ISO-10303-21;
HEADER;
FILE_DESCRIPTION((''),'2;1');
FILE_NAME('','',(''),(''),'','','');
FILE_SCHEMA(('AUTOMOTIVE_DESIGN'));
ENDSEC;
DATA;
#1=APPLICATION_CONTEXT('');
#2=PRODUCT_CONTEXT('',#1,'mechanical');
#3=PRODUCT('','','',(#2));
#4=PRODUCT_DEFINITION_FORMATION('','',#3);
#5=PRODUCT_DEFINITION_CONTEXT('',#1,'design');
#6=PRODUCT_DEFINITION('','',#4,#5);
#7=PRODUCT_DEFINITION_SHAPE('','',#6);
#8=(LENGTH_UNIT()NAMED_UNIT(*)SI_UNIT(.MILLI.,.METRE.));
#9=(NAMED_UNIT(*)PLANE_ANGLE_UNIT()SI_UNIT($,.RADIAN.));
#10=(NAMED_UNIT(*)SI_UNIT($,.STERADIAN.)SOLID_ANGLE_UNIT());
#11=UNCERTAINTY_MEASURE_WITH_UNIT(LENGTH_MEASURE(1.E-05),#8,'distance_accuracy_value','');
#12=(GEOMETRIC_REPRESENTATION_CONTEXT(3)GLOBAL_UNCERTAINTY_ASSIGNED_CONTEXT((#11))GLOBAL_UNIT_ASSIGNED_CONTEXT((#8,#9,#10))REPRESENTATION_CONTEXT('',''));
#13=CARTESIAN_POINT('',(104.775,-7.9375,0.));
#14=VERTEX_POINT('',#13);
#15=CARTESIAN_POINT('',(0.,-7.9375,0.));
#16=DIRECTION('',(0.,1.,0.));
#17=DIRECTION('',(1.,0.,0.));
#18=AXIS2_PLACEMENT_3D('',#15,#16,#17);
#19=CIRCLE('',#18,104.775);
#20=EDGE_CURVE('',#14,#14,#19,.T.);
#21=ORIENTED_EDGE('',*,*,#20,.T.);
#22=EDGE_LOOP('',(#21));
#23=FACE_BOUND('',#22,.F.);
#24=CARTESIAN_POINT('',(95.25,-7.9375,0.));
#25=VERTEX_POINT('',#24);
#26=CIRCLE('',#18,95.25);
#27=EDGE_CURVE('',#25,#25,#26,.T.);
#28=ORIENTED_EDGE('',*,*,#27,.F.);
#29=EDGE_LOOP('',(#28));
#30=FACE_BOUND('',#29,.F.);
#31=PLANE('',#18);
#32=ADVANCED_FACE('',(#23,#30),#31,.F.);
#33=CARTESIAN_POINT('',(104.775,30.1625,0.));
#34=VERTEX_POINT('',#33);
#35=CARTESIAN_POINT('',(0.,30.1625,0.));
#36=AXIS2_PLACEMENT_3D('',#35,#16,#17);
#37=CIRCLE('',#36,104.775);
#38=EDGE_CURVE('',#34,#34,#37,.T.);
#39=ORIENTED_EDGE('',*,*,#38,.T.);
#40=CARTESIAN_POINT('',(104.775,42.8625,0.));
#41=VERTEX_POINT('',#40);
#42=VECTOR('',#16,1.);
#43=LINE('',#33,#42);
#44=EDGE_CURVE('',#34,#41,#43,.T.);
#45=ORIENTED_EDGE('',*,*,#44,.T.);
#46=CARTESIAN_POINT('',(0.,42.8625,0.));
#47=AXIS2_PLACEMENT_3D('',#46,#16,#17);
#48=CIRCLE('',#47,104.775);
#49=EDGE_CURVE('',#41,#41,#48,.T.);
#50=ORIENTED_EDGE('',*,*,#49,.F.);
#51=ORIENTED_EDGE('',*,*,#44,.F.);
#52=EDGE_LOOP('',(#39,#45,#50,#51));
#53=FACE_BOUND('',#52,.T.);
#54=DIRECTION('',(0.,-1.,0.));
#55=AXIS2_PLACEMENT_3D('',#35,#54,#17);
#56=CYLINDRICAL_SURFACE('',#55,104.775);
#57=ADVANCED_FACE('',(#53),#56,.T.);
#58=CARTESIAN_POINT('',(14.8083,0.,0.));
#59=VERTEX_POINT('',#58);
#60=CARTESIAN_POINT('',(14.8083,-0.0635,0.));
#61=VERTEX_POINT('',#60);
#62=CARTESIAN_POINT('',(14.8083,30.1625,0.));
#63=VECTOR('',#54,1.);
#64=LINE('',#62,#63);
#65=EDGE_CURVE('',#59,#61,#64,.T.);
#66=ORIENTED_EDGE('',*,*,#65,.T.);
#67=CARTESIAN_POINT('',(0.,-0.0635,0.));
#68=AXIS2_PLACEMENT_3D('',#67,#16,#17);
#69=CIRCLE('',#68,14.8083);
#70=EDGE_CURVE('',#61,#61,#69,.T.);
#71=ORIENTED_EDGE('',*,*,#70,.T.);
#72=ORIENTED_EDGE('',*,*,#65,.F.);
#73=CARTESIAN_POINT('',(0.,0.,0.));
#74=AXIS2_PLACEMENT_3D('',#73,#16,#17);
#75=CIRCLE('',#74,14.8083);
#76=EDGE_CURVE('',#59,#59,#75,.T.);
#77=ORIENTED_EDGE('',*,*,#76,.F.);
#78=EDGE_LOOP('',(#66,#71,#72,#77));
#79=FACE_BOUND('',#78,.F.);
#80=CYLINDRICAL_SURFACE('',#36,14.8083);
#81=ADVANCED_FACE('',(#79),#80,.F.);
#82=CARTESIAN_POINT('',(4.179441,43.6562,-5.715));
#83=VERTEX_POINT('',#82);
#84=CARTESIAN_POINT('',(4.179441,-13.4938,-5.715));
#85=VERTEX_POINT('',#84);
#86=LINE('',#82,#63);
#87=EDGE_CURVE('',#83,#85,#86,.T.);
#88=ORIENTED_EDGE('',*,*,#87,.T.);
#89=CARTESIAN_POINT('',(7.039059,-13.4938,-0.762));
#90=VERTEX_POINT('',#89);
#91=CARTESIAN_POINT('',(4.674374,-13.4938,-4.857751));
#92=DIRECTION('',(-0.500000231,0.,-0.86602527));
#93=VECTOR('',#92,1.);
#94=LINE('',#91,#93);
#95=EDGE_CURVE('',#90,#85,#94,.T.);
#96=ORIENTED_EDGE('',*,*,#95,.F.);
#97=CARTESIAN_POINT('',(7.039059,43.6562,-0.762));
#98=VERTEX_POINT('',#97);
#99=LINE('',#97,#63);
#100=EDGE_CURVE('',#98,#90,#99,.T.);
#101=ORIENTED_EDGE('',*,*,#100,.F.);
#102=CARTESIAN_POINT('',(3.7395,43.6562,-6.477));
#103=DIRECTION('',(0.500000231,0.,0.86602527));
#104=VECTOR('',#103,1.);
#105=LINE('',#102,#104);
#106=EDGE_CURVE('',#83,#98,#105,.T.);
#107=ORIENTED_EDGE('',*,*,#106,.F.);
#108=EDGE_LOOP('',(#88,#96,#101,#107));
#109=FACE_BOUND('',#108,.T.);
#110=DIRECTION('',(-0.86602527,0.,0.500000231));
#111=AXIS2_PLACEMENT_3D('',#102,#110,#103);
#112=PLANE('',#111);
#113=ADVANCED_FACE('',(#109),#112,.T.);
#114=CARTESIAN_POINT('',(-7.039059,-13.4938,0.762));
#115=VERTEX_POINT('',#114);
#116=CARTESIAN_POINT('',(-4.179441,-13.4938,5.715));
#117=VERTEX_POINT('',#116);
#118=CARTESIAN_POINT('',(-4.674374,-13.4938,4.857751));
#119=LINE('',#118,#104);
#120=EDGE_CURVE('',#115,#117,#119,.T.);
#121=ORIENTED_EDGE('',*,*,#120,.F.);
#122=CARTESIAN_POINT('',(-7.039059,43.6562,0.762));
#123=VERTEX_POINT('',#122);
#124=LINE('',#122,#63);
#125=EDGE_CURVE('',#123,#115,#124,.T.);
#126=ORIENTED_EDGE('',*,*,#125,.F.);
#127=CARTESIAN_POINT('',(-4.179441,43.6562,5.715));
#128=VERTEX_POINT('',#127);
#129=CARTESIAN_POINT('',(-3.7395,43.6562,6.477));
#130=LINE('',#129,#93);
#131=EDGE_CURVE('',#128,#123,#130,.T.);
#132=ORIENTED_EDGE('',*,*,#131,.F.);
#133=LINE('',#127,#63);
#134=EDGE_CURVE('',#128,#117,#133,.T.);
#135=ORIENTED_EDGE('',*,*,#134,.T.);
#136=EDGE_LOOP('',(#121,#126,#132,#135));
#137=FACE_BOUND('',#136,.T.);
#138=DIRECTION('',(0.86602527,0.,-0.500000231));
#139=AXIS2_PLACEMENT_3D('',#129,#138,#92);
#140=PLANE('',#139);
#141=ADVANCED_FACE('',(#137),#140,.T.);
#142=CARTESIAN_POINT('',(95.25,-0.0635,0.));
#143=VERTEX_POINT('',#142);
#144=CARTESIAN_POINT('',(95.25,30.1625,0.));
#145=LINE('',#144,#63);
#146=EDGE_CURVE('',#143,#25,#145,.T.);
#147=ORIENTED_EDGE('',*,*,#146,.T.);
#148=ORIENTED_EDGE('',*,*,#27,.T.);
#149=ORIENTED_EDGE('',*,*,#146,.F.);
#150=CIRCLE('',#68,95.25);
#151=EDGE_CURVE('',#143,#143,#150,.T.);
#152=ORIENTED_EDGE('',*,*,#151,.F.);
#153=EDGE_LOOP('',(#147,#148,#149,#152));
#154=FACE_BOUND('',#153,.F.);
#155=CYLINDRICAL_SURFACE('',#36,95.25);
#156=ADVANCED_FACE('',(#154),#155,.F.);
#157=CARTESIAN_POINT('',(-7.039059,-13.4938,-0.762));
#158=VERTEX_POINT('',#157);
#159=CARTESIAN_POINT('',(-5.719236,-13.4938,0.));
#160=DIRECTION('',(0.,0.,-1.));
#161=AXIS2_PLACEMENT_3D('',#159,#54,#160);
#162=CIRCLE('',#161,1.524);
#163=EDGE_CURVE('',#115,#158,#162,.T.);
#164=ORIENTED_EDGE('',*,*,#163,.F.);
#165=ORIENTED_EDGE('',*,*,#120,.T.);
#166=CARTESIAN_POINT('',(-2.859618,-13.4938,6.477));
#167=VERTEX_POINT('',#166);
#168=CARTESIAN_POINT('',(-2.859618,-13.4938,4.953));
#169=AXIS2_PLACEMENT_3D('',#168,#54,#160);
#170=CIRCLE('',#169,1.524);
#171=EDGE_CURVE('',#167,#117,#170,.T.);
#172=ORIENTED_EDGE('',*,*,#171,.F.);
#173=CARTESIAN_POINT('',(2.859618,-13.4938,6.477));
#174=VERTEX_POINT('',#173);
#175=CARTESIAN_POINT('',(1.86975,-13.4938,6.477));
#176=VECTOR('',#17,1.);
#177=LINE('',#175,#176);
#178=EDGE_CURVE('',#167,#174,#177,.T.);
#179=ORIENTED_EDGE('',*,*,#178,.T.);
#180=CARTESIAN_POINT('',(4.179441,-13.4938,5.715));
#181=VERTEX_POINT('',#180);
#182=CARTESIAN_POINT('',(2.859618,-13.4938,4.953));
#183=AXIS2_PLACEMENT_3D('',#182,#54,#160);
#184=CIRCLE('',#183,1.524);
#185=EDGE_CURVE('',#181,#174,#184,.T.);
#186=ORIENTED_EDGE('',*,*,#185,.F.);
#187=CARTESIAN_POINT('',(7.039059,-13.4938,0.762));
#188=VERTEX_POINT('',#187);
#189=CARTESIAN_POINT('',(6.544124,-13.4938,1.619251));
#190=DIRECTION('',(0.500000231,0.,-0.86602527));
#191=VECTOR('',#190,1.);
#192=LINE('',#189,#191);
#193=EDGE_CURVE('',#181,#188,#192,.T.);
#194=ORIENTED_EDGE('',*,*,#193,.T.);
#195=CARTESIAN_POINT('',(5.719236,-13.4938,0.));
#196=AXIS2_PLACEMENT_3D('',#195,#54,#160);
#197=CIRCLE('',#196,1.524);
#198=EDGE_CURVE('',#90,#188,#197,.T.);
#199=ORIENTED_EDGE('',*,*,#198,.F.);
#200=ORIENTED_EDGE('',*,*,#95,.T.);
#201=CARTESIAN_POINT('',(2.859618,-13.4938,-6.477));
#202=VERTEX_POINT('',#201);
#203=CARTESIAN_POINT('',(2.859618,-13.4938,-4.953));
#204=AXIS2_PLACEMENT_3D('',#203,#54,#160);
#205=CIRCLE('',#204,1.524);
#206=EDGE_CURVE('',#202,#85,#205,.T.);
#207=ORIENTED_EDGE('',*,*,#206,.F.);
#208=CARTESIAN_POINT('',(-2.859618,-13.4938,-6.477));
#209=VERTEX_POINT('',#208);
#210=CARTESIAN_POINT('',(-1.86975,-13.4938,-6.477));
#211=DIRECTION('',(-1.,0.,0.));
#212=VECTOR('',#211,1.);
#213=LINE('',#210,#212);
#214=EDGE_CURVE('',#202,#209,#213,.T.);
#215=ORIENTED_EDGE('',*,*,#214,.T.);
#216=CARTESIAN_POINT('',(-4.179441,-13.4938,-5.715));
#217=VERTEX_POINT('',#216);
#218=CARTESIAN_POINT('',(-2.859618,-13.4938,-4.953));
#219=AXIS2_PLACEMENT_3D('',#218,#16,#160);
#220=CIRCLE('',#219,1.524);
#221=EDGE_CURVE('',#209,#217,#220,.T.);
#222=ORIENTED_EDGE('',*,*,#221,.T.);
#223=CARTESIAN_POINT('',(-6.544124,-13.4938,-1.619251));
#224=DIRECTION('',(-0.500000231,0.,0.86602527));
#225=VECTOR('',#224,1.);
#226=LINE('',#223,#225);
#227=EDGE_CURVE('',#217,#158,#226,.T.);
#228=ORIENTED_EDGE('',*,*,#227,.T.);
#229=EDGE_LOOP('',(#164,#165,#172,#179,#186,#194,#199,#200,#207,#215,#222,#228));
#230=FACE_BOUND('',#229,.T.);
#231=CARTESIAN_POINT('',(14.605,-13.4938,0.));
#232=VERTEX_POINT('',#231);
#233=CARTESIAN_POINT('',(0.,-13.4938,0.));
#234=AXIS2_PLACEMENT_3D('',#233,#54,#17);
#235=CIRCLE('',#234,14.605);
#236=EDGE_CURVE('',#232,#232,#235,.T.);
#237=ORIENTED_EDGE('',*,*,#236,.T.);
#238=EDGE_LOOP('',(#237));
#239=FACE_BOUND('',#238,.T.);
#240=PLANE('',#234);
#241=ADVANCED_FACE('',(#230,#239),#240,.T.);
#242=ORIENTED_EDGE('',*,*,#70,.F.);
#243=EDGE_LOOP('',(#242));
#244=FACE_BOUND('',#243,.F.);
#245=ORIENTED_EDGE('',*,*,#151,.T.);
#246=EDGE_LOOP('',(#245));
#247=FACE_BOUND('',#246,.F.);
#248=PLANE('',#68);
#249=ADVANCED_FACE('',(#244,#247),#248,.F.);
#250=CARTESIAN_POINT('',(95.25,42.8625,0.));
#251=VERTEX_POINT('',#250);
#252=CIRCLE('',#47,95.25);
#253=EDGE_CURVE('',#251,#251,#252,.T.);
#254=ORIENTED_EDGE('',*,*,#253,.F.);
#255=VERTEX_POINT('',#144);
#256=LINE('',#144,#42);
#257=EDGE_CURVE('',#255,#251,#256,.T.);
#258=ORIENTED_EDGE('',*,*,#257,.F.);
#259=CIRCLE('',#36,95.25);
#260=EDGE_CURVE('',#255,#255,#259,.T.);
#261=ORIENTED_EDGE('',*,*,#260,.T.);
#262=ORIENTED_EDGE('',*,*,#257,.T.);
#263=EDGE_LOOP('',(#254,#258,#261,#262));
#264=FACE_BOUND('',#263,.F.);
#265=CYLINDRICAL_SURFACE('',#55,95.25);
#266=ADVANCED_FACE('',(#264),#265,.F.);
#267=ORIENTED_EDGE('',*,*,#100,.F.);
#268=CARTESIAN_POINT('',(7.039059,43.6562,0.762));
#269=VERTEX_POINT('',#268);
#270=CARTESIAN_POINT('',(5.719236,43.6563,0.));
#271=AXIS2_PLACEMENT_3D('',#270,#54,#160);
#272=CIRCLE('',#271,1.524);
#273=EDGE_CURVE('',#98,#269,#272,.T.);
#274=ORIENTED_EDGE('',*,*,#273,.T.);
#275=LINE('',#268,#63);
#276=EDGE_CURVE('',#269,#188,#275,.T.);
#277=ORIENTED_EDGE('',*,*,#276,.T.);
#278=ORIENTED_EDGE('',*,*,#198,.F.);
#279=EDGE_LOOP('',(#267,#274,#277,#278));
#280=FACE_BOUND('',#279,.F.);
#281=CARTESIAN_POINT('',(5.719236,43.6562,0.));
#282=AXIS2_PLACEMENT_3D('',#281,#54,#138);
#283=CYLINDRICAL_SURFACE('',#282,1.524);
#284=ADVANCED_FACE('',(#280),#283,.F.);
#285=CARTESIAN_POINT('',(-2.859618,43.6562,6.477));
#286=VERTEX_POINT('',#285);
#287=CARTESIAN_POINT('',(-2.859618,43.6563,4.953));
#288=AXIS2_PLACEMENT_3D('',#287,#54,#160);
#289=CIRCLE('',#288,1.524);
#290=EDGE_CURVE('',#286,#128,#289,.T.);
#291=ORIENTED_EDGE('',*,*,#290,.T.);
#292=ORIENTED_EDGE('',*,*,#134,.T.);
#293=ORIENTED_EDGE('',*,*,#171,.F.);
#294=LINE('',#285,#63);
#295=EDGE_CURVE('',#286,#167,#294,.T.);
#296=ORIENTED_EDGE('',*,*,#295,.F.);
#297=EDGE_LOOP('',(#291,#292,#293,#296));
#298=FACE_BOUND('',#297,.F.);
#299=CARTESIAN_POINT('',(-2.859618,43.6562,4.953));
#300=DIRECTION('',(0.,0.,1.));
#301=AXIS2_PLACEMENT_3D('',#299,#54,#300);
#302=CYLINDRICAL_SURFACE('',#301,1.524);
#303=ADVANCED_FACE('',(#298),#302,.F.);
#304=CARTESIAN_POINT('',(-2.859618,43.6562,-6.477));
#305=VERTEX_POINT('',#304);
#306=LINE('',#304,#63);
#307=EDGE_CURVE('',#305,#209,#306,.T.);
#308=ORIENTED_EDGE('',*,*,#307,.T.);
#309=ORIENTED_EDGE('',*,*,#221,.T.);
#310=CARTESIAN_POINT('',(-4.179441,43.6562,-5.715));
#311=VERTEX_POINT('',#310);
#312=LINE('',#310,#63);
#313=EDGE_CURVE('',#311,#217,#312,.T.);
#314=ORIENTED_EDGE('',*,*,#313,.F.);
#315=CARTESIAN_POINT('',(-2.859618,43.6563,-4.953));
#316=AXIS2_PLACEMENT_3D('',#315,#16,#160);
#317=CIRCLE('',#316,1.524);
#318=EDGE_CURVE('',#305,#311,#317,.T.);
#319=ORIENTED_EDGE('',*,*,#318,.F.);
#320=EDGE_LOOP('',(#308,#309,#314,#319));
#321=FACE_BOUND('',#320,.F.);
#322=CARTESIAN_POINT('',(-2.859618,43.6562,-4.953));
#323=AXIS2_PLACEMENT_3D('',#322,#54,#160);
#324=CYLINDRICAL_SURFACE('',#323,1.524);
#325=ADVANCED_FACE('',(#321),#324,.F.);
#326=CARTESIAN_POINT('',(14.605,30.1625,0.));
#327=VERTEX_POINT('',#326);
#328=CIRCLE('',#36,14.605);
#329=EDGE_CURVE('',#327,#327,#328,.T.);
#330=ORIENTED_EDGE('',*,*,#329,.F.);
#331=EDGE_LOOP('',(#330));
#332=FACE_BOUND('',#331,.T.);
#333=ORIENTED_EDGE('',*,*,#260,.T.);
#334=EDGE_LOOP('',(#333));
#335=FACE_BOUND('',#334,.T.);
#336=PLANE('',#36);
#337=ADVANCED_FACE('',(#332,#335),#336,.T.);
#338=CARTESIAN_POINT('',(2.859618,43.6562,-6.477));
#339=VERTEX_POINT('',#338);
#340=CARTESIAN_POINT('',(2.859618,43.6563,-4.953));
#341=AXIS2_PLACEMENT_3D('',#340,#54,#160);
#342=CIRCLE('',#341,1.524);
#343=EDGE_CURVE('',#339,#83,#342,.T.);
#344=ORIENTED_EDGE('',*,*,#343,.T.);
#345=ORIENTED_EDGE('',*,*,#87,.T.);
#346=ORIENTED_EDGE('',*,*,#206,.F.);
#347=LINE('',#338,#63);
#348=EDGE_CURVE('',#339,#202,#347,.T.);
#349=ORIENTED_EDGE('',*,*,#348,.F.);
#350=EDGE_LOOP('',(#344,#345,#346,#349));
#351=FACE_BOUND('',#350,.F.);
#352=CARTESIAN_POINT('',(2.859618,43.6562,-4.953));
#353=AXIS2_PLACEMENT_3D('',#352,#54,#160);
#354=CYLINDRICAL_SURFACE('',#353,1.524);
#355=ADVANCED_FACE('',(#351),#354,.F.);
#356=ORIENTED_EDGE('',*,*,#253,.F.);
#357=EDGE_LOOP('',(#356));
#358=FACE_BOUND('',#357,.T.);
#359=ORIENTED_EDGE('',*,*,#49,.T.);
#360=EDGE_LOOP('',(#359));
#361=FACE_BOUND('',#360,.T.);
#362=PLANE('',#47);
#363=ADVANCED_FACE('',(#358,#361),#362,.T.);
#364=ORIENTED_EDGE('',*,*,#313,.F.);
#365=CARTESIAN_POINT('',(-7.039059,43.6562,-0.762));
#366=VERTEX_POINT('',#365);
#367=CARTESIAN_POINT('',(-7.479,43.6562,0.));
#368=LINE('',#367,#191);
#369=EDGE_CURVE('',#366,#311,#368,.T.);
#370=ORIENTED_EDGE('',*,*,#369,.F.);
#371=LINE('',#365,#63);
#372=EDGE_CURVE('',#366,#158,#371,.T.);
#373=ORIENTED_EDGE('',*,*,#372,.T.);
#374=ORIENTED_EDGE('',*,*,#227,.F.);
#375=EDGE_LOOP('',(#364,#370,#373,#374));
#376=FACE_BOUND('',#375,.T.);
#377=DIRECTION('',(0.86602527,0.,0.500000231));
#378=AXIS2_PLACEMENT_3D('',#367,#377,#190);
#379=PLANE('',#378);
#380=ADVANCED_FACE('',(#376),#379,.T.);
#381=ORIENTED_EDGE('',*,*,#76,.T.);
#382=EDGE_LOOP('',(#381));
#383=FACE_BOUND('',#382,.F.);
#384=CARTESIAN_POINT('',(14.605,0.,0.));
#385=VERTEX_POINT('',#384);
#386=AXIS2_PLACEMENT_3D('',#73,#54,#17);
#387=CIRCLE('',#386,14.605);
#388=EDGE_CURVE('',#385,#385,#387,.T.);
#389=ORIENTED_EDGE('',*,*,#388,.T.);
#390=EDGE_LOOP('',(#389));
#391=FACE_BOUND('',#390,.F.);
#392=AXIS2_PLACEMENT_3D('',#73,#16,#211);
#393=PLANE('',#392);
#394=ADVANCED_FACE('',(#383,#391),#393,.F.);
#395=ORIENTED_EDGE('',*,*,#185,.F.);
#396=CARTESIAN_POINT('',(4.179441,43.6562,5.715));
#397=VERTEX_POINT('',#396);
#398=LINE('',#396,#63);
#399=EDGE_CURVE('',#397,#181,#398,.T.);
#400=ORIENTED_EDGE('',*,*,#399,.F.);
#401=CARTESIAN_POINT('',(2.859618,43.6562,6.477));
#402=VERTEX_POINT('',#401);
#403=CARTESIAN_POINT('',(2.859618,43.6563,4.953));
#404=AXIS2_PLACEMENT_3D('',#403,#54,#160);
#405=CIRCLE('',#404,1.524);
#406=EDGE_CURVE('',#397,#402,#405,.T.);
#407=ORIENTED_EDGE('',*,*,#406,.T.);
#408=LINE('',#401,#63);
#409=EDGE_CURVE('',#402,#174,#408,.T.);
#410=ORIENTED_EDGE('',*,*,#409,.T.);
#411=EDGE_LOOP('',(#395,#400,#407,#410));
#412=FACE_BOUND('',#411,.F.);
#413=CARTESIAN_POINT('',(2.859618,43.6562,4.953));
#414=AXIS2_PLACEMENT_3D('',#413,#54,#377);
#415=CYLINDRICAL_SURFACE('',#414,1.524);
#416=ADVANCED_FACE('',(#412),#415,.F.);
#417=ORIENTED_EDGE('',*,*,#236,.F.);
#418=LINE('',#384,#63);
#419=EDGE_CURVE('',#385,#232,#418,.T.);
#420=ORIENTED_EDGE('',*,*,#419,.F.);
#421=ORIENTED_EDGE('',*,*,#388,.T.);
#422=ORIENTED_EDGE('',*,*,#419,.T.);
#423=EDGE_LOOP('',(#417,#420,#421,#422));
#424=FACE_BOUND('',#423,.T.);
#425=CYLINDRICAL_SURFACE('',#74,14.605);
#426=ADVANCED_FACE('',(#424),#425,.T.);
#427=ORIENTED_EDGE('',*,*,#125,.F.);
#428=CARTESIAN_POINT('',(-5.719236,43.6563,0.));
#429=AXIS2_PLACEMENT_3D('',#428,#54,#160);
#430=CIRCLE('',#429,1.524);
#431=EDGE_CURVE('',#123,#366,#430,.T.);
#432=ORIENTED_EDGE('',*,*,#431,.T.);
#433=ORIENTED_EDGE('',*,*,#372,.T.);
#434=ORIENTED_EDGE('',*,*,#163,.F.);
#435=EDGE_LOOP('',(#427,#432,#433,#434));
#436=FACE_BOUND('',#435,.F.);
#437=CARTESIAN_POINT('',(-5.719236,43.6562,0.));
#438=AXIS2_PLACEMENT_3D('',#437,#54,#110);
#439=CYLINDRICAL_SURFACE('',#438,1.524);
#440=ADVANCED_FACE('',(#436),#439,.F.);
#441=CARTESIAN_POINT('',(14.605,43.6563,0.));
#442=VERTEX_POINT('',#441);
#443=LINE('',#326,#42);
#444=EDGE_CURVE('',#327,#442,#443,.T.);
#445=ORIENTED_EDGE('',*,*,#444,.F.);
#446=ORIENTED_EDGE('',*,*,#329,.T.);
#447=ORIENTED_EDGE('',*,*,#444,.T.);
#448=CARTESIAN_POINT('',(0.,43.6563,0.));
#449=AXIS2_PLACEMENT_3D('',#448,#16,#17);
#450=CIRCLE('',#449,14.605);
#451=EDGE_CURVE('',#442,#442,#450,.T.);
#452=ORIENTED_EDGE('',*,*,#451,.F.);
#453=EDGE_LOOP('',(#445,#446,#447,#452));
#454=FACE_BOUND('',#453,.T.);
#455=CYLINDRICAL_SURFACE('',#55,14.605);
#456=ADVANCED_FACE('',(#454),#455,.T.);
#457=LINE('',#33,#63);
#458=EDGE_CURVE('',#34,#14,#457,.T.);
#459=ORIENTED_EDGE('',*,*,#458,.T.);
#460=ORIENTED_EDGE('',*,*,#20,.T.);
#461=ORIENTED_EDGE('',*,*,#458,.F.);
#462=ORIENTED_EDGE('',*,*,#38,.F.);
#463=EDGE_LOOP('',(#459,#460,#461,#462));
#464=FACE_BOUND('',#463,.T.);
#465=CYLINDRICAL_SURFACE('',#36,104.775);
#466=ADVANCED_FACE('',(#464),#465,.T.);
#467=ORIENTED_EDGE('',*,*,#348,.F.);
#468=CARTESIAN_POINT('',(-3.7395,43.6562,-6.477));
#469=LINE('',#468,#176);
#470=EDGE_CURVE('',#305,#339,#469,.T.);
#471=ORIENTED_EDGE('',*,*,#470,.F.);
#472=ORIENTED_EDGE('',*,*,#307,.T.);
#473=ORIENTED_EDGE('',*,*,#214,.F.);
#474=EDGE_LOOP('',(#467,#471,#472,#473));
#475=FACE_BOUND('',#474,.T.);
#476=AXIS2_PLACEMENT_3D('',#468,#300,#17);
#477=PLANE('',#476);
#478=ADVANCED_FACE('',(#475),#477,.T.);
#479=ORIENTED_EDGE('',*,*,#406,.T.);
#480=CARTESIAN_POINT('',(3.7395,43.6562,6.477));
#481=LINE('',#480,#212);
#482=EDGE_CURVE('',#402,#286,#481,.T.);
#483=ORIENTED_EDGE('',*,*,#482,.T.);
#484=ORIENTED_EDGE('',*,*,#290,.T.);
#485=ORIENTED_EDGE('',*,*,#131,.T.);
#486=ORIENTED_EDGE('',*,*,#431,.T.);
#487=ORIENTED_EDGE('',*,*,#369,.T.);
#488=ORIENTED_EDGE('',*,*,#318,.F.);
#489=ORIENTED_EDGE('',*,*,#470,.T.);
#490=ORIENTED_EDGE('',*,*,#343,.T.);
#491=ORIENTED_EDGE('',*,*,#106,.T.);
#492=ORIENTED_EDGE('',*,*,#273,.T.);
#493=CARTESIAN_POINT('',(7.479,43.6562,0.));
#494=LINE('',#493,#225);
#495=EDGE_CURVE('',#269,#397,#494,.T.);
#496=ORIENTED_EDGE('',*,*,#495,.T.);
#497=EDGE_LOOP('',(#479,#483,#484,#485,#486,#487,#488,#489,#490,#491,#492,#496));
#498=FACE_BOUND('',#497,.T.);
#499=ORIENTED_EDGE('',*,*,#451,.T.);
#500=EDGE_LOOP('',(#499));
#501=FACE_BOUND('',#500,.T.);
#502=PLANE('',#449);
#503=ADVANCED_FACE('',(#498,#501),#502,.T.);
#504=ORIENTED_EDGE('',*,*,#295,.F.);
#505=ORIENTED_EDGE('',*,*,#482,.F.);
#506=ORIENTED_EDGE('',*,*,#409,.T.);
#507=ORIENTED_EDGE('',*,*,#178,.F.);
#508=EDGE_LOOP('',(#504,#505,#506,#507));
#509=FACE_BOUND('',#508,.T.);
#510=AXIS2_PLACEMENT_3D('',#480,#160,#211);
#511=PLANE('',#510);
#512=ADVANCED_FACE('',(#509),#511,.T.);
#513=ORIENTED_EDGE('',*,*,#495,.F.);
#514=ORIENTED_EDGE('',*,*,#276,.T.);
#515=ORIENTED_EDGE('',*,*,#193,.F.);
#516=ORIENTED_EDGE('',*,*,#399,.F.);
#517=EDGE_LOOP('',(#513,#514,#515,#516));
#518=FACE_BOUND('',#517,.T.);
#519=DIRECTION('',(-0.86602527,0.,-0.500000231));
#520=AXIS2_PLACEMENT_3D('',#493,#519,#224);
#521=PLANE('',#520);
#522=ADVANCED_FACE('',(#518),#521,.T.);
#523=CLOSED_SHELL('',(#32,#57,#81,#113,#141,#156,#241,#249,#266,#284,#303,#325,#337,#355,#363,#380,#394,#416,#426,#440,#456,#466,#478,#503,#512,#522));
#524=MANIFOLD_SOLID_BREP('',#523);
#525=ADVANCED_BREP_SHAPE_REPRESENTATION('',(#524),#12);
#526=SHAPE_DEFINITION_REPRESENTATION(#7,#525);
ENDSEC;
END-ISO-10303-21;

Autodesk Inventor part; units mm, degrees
ref_plane "YZ Plane" through (0, 0, 0) normal (1, 0, 0) x (0, 1, 0)
ref_plane "XZ Plane" through (0, 0, 0) normal (0, 1, 0) x (-1, 0, 0)
ref_plane "XY Plane" through (0, 0, 0) normal (0, 0, 1) x (1, 0, 0)
sketch "Sketch1" plane through (0, 0, 0) normal (0, 1, 0) x (-1, 0, 0)
  line L0 (18.3309, -0.0019) -> (9.1638, -15.8759)
  line L1 (9.1638, -15.8759) -> (-9.1671, -15.8741)
  line L2 (-9.1671, -15.8741) -> (-18.3309, 0.0019)
  line L3 (-18.3309, 0.0019) -> (-9.1638, 15.8759)
  line L4 (-9.1638, 15.8759) -> (9.1671, 15.8741)
  line L5 (9.1671, 15.8741) -> (18.3309, -0.0019)
  point P0 (0, 0)
  dimension "d2" = 31.75
extrude "Extrusion1" add sketch "Sketch1" along normal blind 30.1625
sketch "Sketch2" plane through (0, 30.1625, 0) normal (0, 1, 0) x (1, 0, 0)
  circle A0 centre (0, 0) radius 14.605
  dimension "d5" = 29.21
extrude "Extrusion2" add sketch "Sketch2" along normal blind 13.4938
sketch "Sketch3" plane through (0, 0, 0) normal (0, -1, 0) x (1, 0, 0)
  circle A0 centre (0, 0) radius 14.605
  dimension "d8" = 29.21
extrude "Extrusion3" add sketch "Sketch3" along normal blind 13.4938
sketch "Sketch4" plane through (0, 43.6562, 0) normal (0, 1, 0) x (1, 0, 0)
  line L0 (-7.479, 0) -> (-3.7395, 6.477)
  line L1 (-3.7395, 6.477) -> (3.7395, 6.477)
  line L2 (3.7395, 6.477) -> (7.479, 0)
  line L3 (7.479, 0) -> (3.7395, -6.477)
  line L4 (3.7395, -6.477) -> (-3.7395, -6.477)
  line L5 (-3.7395, -6.477) -> (-7.479, 0)
  point P0 (0, 0)
  point P1 (0, 0)
  dimension "d11" = 12.954
extrude "Extrusion4" cut sketch "Sketch4" against normal through all
fillet "Fillet1" radius 1.524 6 edges at (7.479, 15.0813, 0) (3.7395, 15.0813, -6.477) (-7.479, 15.0813, 0) (-3.7395, 15.0813, -6.477) (-3.7395, 15.0813, 6.477) (3.7395, 15.0813, 6.477)
sketch "Sketch5" plane through (0, 30.1625, 0) normal (0, 1, 0) x (1, 0, 0)
  circle A0 centre (0, 0) radius 14.8083
  circle A1 centre (0, 0) radius 95.25
  dimension "d15" = 190.5
extrude "Extrusion5" add sketch "Sketch5" against normal blind 30.226
sketch "Sketch6" plane through (0, 30.1625, 0) normal (0, 1, 0) x (1, 0, 0)
  circle A0 centre (0, 0) radius 95.25
  circle A1 centre (0, 0) radius 104.775
  dimension "d18" = 209.55
extrude "Extrusion6" add sketch "Sketch6" along normal blind 12.7 and the other way blind 38.1
properties part number "Wheel Hub" material "Acetal Resin, Black"
